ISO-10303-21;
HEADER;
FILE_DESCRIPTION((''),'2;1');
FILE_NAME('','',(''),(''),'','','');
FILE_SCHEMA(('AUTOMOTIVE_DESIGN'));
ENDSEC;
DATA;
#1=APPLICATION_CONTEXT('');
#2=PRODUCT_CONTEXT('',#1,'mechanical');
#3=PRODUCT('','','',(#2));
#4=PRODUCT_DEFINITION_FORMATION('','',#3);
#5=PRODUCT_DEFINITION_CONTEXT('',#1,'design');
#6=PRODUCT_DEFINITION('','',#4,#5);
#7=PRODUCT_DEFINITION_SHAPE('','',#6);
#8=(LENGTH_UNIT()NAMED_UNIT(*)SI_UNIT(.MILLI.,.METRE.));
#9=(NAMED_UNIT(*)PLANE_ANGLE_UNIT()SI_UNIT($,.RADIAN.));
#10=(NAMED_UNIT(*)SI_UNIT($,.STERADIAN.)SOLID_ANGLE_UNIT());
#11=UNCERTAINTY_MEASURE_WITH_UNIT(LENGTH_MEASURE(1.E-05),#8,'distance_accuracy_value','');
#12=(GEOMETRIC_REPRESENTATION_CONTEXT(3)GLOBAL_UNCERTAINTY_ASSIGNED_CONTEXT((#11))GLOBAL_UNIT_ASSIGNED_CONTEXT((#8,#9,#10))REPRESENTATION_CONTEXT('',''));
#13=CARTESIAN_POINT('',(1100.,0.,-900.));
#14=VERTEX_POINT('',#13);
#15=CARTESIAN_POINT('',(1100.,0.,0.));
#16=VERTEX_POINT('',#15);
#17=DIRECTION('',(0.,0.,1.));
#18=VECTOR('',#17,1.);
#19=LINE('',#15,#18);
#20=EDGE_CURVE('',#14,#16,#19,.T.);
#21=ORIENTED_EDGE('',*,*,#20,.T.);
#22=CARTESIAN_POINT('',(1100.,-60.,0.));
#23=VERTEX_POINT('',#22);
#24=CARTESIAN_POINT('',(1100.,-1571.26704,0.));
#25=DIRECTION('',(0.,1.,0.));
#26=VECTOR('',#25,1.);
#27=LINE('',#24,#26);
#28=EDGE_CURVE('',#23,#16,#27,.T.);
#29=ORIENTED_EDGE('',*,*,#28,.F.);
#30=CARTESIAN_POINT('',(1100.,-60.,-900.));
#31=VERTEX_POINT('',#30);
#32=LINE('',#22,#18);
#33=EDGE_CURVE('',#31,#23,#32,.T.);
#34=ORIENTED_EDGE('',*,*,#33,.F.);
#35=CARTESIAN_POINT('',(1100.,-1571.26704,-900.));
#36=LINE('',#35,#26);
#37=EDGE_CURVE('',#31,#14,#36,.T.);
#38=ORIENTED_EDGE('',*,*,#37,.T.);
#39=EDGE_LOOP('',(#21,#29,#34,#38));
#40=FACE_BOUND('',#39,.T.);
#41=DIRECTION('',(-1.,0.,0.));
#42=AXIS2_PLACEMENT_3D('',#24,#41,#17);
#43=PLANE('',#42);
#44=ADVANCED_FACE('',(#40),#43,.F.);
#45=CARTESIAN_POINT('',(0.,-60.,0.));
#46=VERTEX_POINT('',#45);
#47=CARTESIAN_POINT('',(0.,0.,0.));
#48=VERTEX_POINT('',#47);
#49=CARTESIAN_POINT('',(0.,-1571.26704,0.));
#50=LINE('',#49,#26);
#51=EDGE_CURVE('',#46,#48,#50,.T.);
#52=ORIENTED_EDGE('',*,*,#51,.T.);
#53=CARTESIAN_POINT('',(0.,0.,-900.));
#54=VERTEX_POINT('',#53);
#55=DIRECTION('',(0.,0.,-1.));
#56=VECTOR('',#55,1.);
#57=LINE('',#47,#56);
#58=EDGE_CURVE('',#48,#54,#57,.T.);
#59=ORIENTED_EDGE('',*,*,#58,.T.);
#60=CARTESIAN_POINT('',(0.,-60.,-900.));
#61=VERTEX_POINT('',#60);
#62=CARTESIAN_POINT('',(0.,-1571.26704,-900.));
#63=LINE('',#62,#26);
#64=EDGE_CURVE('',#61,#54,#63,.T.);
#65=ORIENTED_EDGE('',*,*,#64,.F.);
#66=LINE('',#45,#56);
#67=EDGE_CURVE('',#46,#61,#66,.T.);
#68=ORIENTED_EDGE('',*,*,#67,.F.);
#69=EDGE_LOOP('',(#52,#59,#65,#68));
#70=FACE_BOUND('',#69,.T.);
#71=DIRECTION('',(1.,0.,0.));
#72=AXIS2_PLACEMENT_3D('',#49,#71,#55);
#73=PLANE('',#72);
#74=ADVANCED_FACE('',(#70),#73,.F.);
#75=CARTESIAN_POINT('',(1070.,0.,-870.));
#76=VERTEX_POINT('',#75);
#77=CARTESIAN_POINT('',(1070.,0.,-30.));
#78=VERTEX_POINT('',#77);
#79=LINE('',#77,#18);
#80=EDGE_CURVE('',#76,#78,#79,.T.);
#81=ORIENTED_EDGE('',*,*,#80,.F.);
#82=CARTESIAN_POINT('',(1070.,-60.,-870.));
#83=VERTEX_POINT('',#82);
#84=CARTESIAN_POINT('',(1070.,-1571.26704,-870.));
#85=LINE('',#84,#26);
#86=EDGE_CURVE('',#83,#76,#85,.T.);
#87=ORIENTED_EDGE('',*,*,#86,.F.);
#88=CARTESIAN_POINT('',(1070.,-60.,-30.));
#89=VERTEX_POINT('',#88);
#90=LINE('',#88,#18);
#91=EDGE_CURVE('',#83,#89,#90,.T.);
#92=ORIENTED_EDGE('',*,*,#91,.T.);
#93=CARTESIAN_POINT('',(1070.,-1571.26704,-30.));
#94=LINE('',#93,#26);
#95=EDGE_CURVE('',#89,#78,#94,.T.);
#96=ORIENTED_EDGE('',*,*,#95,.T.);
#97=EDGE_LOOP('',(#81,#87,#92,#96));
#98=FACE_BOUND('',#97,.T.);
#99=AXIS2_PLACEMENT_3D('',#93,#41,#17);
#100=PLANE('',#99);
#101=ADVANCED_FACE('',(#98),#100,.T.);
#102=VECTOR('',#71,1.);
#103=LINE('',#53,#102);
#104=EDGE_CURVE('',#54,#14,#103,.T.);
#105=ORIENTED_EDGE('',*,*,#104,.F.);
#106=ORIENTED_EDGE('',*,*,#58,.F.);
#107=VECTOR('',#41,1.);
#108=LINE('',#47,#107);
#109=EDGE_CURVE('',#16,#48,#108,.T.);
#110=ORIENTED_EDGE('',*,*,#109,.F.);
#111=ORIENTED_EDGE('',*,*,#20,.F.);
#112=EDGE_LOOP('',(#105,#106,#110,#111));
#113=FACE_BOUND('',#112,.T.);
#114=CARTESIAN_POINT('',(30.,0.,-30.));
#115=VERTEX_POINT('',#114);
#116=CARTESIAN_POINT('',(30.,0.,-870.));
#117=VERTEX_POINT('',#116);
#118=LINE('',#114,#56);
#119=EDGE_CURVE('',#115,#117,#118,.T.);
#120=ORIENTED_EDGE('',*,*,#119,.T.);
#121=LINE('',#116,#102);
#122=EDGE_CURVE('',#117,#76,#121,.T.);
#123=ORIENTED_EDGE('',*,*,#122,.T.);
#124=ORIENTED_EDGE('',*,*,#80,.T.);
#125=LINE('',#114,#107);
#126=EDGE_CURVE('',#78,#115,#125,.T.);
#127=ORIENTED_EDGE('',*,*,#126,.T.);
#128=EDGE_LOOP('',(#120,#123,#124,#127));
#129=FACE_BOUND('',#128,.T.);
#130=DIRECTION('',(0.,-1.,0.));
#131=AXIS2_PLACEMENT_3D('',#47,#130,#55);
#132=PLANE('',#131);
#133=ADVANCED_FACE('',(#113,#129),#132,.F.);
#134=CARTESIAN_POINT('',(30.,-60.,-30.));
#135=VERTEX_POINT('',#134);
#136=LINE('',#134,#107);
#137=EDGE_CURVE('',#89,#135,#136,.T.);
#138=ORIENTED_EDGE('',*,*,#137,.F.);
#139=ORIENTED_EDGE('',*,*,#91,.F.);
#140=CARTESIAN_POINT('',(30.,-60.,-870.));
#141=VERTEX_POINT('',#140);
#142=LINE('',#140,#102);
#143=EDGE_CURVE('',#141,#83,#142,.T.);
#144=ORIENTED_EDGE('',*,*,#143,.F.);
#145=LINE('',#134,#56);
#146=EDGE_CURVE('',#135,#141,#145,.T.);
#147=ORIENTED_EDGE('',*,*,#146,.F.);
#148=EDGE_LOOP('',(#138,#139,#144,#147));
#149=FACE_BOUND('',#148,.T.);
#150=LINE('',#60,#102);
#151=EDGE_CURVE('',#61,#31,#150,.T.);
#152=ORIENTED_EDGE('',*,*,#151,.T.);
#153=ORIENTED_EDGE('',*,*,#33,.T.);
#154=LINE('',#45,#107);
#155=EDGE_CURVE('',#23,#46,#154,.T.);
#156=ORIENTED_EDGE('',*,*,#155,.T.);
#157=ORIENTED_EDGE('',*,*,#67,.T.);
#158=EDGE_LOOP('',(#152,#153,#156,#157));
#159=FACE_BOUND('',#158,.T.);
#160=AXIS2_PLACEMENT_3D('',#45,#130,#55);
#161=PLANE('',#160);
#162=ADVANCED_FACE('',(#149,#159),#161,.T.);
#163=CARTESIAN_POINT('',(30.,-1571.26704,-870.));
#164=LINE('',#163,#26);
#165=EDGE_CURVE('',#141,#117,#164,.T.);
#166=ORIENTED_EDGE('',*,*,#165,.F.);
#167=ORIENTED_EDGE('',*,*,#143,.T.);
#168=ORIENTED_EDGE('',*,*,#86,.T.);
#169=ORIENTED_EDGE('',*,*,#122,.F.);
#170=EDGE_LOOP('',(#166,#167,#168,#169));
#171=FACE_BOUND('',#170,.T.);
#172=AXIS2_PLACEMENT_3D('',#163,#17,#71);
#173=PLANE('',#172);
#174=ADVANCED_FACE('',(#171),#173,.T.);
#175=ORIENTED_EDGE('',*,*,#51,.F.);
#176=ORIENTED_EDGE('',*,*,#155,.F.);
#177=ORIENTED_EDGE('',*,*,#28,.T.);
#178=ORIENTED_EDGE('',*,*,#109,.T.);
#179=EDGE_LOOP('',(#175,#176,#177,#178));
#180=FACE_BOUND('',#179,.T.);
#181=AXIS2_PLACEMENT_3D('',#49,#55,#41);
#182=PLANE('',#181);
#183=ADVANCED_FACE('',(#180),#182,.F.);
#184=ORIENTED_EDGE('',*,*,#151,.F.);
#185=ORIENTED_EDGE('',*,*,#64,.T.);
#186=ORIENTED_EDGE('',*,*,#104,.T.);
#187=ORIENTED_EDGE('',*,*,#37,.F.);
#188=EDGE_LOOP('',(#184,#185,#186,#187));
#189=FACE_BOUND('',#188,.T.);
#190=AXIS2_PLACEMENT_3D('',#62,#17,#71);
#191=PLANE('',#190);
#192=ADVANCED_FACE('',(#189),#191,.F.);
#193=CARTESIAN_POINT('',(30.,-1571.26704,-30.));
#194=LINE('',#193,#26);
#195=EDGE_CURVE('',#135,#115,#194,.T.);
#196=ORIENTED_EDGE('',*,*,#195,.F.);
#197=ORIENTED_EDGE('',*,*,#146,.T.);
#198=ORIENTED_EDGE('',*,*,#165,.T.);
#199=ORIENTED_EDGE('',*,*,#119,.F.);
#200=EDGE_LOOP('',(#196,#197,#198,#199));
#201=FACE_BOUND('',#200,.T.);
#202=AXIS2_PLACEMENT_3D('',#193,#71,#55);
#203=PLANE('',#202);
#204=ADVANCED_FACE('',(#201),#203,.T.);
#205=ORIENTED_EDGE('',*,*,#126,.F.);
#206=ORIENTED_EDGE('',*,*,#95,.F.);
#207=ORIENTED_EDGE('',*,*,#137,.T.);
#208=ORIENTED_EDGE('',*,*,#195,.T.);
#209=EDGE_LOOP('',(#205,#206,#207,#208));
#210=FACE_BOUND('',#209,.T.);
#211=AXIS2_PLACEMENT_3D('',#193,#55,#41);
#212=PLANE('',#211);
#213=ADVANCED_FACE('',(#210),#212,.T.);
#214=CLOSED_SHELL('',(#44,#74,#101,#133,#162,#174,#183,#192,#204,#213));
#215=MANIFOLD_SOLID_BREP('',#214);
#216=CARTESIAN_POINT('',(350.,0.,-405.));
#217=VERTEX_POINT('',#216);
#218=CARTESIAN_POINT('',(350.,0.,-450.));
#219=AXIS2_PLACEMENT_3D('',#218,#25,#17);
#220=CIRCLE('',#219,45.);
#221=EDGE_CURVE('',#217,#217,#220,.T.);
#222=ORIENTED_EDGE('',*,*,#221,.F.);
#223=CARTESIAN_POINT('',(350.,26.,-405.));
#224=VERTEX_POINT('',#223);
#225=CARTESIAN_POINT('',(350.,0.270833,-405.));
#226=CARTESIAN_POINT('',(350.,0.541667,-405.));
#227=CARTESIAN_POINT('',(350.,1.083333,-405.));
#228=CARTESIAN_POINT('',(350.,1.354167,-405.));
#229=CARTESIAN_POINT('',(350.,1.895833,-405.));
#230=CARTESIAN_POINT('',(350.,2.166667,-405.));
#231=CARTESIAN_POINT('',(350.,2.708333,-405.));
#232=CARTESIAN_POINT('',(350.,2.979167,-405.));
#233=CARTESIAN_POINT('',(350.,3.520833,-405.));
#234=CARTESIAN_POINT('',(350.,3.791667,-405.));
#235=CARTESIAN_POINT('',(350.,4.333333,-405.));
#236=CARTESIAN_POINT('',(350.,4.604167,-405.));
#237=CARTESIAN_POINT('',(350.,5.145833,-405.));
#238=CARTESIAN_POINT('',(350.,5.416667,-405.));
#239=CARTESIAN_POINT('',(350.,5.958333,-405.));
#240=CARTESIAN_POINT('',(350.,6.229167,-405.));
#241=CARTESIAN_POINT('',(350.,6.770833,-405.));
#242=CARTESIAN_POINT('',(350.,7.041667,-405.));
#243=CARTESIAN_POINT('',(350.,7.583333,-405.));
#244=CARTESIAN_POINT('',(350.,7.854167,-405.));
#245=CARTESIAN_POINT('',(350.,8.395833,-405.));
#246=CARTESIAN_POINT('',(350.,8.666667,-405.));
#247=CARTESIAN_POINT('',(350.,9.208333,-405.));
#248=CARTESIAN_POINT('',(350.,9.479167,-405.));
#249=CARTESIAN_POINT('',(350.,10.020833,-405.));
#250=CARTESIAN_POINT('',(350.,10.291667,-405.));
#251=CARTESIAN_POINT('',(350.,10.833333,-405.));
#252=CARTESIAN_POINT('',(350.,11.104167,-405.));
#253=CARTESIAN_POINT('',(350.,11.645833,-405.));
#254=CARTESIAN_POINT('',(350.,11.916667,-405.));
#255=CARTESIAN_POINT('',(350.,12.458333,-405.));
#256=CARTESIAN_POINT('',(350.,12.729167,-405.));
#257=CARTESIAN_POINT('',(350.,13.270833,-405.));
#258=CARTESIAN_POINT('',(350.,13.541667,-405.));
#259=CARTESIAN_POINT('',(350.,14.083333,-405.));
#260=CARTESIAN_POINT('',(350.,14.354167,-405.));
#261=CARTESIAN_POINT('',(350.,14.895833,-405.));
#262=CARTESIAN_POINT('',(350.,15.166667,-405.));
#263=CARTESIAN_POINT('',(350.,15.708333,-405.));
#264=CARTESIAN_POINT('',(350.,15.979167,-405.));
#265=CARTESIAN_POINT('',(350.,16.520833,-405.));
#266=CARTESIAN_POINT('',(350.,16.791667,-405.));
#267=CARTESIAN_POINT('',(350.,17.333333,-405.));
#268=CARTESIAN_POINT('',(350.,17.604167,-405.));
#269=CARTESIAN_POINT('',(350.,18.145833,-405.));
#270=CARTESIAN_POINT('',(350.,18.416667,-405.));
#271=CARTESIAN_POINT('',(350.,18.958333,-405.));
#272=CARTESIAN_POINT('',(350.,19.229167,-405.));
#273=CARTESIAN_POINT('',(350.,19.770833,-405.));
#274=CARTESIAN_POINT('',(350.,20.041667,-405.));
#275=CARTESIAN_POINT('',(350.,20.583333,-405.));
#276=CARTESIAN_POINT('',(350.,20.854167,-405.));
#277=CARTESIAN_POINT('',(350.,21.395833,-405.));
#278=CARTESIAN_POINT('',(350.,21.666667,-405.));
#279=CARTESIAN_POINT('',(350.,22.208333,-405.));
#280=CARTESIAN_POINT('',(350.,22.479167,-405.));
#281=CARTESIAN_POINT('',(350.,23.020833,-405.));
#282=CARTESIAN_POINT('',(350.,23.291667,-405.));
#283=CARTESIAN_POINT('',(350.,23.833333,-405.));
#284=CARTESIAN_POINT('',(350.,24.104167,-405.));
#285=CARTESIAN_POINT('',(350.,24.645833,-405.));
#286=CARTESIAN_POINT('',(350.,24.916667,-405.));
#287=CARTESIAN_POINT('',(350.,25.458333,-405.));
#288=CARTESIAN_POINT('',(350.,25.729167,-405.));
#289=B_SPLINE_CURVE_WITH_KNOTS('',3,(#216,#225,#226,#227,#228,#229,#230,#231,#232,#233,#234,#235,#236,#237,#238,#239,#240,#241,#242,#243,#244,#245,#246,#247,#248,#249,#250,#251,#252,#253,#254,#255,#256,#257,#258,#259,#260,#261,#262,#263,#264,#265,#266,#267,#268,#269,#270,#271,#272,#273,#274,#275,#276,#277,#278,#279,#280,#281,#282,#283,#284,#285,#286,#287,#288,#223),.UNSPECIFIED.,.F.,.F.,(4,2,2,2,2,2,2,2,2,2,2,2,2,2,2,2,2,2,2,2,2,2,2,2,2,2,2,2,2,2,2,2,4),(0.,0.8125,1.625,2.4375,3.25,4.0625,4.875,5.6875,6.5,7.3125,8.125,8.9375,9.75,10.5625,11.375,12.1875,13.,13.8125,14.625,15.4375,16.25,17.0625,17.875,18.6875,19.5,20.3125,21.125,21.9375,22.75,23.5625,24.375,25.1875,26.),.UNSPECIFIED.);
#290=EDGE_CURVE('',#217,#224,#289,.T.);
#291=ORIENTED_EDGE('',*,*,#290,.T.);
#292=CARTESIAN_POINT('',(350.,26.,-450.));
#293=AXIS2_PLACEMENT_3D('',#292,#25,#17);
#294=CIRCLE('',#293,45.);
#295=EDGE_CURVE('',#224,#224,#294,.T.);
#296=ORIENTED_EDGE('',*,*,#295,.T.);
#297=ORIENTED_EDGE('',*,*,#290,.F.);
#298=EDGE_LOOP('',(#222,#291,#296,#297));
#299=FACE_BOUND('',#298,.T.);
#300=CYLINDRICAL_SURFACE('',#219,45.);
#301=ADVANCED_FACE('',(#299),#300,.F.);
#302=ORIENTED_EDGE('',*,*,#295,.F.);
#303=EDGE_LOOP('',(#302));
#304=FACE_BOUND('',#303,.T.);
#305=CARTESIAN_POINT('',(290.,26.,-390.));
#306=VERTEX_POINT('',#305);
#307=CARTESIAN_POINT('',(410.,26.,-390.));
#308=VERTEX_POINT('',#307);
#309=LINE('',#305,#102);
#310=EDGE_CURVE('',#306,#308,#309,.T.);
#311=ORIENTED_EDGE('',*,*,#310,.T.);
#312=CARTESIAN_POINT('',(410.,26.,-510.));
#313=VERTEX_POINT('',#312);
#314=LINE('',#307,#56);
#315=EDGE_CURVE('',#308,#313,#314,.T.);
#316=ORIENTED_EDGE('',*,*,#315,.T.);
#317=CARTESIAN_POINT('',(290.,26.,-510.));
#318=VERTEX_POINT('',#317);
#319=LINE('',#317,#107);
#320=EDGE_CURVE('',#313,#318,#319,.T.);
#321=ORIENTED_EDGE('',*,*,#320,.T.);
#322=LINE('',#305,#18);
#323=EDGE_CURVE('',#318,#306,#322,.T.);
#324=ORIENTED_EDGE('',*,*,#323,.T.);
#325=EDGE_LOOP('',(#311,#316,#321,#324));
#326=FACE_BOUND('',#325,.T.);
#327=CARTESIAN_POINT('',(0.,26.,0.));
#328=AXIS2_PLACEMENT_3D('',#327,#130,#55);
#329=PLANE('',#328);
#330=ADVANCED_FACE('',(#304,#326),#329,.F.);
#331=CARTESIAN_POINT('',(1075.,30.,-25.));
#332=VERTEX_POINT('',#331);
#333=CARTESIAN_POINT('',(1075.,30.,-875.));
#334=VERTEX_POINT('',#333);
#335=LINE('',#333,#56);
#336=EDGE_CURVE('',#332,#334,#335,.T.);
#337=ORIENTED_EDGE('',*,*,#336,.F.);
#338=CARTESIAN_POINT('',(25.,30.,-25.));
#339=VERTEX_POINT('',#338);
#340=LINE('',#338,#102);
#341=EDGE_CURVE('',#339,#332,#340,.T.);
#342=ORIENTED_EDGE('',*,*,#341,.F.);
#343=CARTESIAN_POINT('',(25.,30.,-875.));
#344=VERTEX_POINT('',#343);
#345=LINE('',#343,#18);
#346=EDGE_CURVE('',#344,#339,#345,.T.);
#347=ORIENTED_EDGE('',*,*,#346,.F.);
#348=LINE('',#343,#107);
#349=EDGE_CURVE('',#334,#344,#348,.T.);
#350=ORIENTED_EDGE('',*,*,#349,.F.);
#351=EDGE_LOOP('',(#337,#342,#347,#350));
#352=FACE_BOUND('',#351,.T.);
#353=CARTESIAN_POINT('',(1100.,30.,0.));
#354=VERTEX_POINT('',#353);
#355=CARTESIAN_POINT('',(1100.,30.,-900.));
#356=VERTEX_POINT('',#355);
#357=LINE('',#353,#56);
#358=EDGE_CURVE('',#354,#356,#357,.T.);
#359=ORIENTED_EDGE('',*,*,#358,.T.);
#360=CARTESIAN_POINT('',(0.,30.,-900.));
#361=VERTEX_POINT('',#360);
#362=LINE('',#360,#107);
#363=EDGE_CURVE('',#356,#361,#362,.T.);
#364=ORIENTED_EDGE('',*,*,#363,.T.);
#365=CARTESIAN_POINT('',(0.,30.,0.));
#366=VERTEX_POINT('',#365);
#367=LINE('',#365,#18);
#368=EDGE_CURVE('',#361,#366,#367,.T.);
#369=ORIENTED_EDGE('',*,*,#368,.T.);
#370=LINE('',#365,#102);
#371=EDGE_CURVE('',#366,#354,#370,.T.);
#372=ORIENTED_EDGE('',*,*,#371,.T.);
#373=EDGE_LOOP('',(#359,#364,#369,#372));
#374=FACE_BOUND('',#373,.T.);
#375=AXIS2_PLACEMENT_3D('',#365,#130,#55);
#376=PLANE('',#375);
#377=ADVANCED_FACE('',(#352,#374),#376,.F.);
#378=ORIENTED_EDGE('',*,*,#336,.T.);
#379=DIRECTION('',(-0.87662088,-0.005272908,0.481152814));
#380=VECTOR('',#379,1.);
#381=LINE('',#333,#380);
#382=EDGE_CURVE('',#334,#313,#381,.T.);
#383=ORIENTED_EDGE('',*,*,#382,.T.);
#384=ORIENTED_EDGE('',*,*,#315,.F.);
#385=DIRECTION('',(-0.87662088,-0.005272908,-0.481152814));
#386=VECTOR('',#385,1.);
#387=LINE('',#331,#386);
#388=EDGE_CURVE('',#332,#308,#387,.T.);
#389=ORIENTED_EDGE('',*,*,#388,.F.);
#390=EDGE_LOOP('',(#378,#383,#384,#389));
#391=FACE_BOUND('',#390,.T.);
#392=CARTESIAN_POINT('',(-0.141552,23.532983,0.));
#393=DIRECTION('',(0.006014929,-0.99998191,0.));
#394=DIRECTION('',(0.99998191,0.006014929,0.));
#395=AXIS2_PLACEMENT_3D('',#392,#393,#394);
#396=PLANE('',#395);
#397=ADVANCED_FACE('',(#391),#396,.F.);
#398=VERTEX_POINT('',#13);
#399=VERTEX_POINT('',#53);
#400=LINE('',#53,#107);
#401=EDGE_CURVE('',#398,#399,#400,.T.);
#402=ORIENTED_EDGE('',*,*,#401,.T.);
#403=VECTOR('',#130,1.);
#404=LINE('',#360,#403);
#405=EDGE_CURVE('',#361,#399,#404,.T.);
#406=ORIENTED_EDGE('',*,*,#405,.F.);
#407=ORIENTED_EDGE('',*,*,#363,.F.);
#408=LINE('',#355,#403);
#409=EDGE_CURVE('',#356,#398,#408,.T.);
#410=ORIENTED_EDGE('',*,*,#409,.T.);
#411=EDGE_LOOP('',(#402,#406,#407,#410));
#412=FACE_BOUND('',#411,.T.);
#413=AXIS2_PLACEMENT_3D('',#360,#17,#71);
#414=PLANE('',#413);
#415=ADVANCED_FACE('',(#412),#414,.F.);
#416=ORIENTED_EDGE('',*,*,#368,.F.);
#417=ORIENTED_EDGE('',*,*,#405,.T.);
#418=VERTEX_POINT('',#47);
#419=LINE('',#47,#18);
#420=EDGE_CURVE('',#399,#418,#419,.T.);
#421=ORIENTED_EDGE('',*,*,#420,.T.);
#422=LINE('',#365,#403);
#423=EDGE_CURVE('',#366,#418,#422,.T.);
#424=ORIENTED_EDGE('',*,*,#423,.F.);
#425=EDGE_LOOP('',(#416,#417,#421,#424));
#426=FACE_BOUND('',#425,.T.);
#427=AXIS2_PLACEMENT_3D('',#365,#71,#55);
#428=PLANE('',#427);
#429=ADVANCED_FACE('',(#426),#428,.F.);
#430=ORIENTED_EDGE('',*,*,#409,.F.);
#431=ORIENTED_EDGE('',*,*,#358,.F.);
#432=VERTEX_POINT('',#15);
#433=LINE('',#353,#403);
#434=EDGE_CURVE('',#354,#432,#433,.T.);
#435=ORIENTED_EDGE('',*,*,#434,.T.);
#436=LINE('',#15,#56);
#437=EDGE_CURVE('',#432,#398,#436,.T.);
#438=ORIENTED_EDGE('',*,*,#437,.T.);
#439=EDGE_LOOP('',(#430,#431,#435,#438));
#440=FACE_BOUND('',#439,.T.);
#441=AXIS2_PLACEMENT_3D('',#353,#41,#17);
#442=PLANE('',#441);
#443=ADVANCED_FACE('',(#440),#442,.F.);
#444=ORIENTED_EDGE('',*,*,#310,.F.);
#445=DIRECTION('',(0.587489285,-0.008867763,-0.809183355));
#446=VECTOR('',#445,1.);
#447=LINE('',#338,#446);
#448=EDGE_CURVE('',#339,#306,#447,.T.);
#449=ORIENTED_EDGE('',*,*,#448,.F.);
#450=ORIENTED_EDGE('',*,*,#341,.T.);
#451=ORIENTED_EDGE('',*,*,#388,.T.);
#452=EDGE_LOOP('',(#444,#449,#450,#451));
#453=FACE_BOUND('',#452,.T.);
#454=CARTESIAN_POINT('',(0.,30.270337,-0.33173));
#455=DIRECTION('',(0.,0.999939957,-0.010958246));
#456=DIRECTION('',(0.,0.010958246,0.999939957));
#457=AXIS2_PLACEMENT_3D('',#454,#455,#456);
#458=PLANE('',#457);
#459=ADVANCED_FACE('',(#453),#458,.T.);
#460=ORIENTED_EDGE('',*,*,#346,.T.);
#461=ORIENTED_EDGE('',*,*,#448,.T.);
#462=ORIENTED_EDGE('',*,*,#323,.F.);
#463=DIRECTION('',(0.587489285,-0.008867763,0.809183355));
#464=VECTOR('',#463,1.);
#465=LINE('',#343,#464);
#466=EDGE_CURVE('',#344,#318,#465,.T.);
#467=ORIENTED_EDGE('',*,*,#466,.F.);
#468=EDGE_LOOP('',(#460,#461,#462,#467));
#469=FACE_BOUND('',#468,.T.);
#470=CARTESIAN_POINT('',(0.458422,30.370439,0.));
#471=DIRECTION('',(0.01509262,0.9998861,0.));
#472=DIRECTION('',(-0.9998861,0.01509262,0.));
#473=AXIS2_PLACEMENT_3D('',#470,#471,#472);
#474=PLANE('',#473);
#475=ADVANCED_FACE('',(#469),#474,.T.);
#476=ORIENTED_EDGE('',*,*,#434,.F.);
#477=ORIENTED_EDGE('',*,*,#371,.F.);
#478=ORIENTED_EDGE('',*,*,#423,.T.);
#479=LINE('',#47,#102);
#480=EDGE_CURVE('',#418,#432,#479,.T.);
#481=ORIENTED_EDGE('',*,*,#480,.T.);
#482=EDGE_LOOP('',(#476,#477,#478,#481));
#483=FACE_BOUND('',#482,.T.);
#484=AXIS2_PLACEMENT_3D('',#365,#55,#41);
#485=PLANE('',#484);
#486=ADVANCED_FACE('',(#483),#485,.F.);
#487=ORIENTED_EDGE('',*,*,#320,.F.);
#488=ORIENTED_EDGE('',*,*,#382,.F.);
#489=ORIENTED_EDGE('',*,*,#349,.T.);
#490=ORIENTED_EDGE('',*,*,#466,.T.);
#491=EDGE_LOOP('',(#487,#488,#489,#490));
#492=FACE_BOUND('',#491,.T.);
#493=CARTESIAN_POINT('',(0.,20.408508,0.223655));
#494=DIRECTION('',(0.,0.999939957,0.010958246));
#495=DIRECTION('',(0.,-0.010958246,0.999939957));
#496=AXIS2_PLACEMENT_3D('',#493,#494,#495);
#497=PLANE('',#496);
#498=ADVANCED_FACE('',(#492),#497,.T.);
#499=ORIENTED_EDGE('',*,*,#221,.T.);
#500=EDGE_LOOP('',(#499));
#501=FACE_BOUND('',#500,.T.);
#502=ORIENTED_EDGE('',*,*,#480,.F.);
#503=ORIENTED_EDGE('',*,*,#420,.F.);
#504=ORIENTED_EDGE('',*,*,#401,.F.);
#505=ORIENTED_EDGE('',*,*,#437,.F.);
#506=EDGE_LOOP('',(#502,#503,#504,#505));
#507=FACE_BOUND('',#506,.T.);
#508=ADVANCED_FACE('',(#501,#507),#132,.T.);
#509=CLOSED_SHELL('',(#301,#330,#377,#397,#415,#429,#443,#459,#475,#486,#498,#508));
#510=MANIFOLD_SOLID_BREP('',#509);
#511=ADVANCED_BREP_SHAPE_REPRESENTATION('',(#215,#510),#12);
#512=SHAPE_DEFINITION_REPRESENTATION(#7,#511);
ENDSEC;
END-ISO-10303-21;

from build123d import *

# Parameters (mm, degrees)
SKETCH_1_W          = 1100
SKETCH_1_H          = 900
EXTRUDE_1_DEPTH     = 30
SKETCH_5_R          = 45
CUT_EXTRUDE_4_DEPTH = 1422.504836432
SKETCH_7_W          = 1100
SKETCH_7_H          = 900
SKETCH_7_W_2        = 1040
SKETCH_7_H_2        = 840
EXTRUDE_2_DEPTH     = 60


with BuildPart() as part:
    # Эскиз1 → Бобышка-Вытянуть1 (new body)
    with BuildSketch(Plane(origin=(0, 0, 0), x_dir=(1, 0, 0), z_dir=(0, 1, 0))):
        with Locations((550, 450)):
            Rectangle(SKETCH_1_W, SKETCH_1_H)
    extrude(amount=EXTRUDE_1_DEPTH)

    # Вырез-По сечениям2: read off the stored shape, not the designer's step
    # Вырез-По сечениям2: loft between two sections, ruled curve by curve
    loft_2_from = [
        Edge.make_line((1075, 30, -875), (25, 30, -875)),
        Edge.make_line((25, 30, -875), (25, 30, -25)),
        Edge.make_line((1075, 30, -25), (1075, 30, -875)),
        Edge.make_line((25, 30, -25), (1075, 30, -25)),
    ]
    loft_2_to = [
        Edge.make_line((410, 26, -510), (290, 26, -510)),
        Edge.make_line((290, 26, -510), (290, 26, -390)),
        Edge.make_line((410, 26, -390), (410, 26, -510)),
        Edge.make_line((290, 26, -390), (410, 26, -390)),
    ]
    loft_2 = Solid(Shell([*[Face.make_surface_from_curves(loft_2_from[k], loft_2_to[k]) for k in range(4)], Face(Wire(loft_2_from)), Face(Wire(loft_2_to))]))
    add(loft_2, mode=Mode.SUBTRACT)

    # Эскиз5 → Вырез-Вытянуть4 (cut, through all)
    with BuildSketch(Plane(origin=(0, 26, 0), x_dir=(-1, 0, 0), z_dir=(0, 1, 0))):
        with Locations(Location((-350, -450, 0), (0, 0, 90))):
            Circle(SKETCH_5_R)
    extrude(amount=-CUT_EXTRUDE_4_DEPTH, mode=Mode.SUBTRACT)


with BuildPart() as body_2:
    # Эскиз7 → Бобышка-Вытянуть2 (new body)
    with BuildSketch(Plane(origin=(0, 0, 0), x_dir=(-1, 0, 0), z_dir=(0, -1, 0))):
        with Locations((-550, 450)):
            Rectangle(SKETCH_7_W, SKETCH_7_H)
        with Locations((-550, 450)):
            Rectangle(SKETCH_7_W_2, SKETCH_7_H_2, mode=Mode.SUBTRACT)
    extrude(amount=EXTRUDE_2_DEPTH)


solid = Compound([part.part, body_2.part])
